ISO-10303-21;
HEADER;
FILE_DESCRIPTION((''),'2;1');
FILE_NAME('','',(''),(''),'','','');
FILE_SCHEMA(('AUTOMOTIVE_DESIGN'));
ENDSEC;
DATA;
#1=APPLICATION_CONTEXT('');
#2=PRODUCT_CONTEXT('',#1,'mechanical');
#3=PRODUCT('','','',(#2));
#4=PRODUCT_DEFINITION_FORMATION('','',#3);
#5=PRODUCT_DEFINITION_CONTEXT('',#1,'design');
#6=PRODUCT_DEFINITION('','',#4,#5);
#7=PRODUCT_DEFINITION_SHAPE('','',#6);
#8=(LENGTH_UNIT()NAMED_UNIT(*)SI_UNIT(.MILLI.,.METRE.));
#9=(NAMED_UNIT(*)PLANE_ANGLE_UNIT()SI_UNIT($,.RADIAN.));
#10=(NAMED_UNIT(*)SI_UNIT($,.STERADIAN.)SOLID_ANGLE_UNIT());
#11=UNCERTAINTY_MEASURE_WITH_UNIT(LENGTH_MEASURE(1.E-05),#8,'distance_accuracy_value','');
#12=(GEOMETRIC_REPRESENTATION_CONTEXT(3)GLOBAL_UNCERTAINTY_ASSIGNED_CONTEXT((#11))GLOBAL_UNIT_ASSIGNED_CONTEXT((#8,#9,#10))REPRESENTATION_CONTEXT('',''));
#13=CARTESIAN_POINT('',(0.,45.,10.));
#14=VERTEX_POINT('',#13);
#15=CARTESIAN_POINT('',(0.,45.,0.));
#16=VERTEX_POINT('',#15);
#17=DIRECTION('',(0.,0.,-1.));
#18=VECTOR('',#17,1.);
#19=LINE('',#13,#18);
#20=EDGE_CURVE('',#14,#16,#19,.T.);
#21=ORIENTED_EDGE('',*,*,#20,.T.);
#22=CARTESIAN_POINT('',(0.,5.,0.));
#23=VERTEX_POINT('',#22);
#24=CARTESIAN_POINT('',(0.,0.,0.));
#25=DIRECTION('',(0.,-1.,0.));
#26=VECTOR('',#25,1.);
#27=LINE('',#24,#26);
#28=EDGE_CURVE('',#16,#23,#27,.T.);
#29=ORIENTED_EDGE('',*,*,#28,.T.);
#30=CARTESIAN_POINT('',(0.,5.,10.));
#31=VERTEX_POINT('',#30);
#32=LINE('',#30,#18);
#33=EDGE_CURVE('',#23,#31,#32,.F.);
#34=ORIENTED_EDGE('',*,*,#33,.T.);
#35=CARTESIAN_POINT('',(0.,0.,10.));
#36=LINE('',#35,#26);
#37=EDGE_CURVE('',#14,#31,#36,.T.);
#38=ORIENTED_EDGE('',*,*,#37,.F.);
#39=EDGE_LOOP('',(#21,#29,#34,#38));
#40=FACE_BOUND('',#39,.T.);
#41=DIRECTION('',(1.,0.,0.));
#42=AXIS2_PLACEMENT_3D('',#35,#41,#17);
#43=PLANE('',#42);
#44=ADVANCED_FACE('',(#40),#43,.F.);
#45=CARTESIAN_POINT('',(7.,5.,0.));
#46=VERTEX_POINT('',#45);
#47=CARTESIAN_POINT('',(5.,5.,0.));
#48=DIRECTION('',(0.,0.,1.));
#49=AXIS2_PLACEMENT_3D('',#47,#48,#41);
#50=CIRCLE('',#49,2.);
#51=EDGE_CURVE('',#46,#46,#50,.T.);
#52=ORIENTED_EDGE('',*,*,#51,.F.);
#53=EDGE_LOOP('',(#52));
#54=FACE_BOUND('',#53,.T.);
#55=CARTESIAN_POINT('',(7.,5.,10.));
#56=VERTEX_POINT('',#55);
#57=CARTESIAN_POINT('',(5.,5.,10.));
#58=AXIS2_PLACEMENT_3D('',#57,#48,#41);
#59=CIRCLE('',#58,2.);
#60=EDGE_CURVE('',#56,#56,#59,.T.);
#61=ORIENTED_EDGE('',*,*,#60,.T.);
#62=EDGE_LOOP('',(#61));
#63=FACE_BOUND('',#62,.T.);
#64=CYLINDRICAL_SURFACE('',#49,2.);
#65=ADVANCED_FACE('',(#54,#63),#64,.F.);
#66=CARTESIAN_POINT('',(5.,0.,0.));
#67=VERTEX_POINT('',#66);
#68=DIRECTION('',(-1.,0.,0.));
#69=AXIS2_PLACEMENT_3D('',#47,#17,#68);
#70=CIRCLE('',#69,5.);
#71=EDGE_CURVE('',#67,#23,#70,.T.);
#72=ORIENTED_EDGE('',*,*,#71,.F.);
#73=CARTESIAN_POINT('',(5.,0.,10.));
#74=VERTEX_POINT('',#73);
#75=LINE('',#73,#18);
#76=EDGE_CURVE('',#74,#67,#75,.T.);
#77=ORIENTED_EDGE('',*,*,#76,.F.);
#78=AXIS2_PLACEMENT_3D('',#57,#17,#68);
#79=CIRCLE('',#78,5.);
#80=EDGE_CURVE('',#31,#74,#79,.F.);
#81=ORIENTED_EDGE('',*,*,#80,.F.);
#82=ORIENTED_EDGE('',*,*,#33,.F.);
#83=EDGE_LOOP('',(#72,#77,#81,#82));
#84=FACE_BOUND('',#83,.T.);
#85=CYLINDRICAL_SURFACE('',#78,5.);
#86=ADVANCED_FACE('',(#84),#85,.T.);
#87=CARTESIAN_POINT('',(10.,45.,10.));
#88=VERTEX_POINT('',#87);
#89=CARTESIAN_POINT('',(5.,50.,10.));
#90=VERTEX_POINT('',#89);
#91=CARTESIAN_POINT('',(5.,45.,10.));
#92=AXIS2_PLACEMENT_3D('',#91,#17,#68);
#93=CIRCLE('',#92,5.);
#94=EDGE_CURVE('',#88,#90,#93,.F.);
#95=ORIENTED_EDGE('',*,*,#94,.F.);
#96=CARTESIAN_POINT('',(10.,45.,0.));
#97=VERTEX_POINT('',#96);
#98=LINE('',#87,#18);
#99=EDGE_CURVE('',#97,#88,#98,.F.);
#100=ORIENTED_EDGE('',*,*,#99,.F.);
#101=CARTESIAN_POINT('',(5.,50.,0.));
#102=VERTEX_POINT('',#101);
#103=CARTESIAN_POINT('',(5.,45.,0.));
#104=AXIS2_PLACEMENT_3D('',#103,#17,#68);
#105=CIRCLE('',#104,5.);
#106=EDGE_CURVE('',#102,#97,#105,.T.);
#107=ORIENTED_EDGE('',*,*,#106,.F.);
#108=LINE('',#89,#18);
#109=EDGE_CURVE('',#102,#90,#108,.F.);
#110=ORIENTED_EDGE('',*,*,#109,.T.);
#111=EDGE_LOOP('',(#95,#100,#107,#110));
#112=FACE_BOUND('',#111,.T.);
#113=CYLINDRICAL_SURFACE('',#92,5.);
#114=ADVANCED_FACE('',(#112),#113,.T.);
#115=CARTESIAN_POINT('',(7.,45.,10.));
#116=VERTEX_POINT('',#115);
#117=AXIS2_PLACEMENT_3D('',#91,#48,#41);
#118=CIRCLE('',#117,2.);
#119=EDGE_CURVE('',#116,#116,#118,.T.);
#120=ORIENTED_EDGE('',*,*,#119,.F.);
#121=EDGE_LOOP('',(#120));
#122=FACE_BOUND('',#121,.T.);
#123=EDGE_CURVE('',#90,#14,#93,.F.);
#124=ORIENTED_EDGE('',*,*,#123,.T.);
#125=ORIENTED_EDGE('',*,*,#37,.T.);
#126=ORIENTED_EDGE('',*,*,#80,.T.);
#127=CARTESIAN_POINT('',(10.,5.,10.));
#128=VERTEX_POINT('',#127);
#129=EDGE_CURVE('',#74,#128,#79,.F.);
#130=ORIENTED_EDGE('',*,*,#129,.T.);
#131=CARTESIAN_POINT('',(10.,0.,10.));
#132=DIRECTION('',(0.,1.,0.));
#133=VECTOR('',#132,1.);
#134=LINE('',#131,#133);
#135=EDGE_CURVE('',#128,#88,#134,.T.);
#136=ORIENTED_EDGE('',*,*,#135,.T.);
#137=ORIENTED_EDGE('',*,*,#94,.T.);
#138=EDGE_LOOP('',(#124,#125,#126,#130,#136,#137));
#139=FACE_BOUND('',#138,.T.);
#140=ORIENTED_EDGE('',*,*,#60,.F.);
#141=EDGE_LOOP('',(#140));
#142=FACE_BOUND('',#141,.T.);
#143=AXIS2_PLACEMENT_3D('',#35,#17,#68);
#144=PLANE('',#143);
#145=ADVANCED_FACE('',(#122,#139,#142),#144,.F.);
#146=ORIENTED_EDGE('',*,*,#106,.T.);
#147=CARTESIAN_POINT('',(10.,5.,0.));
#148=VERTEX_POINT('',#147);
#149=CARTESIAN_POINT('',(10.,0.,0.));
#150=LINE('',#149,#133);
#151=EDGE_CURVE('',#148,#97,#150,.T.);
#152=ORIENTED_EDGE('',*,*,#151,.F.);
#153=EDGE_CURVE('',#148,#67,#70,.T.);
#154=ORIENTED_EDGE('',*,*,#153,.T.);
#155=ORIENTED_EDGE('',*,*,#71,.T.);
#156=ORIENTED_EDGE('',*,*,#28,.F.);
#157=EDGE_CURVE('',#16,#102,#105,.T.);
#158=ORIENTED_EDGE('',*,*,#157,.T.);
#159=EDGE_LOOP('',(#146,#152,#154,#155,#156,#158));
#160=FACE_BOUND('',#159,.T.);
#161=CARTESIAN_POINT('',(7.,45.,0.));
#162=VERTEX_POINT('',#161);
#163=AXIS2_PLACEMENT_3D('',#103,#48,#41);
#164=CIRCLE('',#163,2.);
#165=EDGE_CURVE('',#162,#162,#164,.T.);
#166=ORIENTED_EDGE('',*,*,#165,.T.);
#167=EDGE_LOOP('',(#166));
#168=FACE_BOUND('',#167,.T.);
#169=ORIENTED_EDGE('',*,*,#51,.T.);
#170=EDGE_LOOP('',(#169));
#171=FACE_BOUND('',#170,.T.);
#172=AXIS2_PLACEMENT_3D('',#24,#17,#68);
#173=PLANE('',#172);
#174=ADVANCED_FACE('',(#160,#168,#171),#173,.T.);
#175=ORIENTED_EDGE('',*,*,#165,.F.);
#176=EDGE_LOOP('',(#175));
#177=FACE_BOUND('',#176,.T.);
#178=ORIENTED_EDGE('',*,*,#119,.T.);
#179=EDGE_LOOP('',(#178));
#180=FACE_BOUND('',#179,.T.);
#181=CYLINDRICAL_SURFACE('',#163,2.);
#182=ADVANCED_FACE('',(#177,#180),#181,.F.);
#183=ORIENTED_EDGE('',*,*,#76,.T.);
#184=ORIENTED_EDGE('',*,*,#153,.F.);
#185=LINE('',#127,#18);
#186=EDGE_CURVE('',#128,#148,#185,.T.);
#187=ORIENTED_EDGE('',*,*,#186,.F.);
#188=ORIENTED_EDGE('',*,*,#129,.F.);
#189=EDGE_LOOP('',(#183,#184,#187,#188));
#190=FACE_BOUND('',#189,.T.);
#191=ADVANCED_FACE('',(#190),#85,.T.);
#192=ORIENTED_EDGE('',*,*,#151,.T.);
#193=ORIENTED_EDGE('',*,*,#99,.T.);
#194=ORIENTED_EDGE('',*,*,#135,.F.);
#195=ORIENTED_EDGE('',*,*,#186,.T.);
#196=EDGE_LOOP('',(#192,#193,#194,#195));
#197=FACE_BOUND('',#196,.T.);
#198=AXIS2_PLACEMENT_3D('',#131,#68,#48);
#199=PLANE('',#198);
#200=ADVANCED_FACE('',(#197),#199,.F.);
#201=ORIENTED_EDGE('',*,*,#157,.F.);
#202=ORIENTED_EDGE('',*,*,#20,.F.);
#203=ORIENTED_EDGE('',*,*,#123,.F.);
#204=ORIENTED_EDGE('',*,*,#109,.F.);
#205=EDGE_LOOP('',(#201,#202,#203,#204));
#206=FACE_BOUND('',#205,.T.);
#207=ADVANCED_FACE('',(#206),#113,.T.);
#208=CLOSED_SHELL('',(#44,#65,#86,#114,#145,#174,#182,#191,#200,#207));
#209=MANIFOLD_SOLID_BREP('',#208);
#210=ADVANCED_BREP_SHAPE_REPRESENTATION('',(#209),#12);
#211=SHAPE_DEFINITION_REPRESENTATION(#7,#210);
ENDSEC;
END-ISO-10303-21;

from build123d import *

# Parameters (mm, degrees)
ESQUISSE1_W             = 10
ESQUISSE1_H             = 50
BOSS_EXTRU_1_DEPTH      = 10
ESQUISSE2_R             = 2
ENL_V_MAT_EXTRU_1_DEPTH = 10
CONG_1_R                = 5


with BuildPart() as part:
    # Esquisse1 → Boss.-Extru.1 (new body)
    with BuildSketch(Plane.XY):
        with Locations((5, 25)):
            Rectangle(ESQUISSE1_W, ESQUISSE1_H)
    extrude(amount=BOSS_EXTRU_1_DEPTH)

    # Esquisse2 → Enlèv. mat.-Extru.1 (cut)
    with BuildSketch(Plane.XY.offset(10)):
        with Locations((5, 45)):
            Circle(ESQUISSE2_R)
        with Locations((5, 5)):
            Circle(ESQUISSE2_R)
    extrude(amount=-ENL_V_MAT_EXTRU_1_DEPTH, mode=Mode.SUBTRACT)

    # Congé1
    cong_1_edges = [part.edges().sort_by_distance(p)[0] for p in [
        (10, 50, 5),
        (0, 50, 5),
        (10, 0, 5),
        (0, 0, 5),
    ]]
    fillet(cong_1_edges, radius=CONG_1_R - 0.0001)  # a hair under: the kernel refuses the full size


solid = part.part
